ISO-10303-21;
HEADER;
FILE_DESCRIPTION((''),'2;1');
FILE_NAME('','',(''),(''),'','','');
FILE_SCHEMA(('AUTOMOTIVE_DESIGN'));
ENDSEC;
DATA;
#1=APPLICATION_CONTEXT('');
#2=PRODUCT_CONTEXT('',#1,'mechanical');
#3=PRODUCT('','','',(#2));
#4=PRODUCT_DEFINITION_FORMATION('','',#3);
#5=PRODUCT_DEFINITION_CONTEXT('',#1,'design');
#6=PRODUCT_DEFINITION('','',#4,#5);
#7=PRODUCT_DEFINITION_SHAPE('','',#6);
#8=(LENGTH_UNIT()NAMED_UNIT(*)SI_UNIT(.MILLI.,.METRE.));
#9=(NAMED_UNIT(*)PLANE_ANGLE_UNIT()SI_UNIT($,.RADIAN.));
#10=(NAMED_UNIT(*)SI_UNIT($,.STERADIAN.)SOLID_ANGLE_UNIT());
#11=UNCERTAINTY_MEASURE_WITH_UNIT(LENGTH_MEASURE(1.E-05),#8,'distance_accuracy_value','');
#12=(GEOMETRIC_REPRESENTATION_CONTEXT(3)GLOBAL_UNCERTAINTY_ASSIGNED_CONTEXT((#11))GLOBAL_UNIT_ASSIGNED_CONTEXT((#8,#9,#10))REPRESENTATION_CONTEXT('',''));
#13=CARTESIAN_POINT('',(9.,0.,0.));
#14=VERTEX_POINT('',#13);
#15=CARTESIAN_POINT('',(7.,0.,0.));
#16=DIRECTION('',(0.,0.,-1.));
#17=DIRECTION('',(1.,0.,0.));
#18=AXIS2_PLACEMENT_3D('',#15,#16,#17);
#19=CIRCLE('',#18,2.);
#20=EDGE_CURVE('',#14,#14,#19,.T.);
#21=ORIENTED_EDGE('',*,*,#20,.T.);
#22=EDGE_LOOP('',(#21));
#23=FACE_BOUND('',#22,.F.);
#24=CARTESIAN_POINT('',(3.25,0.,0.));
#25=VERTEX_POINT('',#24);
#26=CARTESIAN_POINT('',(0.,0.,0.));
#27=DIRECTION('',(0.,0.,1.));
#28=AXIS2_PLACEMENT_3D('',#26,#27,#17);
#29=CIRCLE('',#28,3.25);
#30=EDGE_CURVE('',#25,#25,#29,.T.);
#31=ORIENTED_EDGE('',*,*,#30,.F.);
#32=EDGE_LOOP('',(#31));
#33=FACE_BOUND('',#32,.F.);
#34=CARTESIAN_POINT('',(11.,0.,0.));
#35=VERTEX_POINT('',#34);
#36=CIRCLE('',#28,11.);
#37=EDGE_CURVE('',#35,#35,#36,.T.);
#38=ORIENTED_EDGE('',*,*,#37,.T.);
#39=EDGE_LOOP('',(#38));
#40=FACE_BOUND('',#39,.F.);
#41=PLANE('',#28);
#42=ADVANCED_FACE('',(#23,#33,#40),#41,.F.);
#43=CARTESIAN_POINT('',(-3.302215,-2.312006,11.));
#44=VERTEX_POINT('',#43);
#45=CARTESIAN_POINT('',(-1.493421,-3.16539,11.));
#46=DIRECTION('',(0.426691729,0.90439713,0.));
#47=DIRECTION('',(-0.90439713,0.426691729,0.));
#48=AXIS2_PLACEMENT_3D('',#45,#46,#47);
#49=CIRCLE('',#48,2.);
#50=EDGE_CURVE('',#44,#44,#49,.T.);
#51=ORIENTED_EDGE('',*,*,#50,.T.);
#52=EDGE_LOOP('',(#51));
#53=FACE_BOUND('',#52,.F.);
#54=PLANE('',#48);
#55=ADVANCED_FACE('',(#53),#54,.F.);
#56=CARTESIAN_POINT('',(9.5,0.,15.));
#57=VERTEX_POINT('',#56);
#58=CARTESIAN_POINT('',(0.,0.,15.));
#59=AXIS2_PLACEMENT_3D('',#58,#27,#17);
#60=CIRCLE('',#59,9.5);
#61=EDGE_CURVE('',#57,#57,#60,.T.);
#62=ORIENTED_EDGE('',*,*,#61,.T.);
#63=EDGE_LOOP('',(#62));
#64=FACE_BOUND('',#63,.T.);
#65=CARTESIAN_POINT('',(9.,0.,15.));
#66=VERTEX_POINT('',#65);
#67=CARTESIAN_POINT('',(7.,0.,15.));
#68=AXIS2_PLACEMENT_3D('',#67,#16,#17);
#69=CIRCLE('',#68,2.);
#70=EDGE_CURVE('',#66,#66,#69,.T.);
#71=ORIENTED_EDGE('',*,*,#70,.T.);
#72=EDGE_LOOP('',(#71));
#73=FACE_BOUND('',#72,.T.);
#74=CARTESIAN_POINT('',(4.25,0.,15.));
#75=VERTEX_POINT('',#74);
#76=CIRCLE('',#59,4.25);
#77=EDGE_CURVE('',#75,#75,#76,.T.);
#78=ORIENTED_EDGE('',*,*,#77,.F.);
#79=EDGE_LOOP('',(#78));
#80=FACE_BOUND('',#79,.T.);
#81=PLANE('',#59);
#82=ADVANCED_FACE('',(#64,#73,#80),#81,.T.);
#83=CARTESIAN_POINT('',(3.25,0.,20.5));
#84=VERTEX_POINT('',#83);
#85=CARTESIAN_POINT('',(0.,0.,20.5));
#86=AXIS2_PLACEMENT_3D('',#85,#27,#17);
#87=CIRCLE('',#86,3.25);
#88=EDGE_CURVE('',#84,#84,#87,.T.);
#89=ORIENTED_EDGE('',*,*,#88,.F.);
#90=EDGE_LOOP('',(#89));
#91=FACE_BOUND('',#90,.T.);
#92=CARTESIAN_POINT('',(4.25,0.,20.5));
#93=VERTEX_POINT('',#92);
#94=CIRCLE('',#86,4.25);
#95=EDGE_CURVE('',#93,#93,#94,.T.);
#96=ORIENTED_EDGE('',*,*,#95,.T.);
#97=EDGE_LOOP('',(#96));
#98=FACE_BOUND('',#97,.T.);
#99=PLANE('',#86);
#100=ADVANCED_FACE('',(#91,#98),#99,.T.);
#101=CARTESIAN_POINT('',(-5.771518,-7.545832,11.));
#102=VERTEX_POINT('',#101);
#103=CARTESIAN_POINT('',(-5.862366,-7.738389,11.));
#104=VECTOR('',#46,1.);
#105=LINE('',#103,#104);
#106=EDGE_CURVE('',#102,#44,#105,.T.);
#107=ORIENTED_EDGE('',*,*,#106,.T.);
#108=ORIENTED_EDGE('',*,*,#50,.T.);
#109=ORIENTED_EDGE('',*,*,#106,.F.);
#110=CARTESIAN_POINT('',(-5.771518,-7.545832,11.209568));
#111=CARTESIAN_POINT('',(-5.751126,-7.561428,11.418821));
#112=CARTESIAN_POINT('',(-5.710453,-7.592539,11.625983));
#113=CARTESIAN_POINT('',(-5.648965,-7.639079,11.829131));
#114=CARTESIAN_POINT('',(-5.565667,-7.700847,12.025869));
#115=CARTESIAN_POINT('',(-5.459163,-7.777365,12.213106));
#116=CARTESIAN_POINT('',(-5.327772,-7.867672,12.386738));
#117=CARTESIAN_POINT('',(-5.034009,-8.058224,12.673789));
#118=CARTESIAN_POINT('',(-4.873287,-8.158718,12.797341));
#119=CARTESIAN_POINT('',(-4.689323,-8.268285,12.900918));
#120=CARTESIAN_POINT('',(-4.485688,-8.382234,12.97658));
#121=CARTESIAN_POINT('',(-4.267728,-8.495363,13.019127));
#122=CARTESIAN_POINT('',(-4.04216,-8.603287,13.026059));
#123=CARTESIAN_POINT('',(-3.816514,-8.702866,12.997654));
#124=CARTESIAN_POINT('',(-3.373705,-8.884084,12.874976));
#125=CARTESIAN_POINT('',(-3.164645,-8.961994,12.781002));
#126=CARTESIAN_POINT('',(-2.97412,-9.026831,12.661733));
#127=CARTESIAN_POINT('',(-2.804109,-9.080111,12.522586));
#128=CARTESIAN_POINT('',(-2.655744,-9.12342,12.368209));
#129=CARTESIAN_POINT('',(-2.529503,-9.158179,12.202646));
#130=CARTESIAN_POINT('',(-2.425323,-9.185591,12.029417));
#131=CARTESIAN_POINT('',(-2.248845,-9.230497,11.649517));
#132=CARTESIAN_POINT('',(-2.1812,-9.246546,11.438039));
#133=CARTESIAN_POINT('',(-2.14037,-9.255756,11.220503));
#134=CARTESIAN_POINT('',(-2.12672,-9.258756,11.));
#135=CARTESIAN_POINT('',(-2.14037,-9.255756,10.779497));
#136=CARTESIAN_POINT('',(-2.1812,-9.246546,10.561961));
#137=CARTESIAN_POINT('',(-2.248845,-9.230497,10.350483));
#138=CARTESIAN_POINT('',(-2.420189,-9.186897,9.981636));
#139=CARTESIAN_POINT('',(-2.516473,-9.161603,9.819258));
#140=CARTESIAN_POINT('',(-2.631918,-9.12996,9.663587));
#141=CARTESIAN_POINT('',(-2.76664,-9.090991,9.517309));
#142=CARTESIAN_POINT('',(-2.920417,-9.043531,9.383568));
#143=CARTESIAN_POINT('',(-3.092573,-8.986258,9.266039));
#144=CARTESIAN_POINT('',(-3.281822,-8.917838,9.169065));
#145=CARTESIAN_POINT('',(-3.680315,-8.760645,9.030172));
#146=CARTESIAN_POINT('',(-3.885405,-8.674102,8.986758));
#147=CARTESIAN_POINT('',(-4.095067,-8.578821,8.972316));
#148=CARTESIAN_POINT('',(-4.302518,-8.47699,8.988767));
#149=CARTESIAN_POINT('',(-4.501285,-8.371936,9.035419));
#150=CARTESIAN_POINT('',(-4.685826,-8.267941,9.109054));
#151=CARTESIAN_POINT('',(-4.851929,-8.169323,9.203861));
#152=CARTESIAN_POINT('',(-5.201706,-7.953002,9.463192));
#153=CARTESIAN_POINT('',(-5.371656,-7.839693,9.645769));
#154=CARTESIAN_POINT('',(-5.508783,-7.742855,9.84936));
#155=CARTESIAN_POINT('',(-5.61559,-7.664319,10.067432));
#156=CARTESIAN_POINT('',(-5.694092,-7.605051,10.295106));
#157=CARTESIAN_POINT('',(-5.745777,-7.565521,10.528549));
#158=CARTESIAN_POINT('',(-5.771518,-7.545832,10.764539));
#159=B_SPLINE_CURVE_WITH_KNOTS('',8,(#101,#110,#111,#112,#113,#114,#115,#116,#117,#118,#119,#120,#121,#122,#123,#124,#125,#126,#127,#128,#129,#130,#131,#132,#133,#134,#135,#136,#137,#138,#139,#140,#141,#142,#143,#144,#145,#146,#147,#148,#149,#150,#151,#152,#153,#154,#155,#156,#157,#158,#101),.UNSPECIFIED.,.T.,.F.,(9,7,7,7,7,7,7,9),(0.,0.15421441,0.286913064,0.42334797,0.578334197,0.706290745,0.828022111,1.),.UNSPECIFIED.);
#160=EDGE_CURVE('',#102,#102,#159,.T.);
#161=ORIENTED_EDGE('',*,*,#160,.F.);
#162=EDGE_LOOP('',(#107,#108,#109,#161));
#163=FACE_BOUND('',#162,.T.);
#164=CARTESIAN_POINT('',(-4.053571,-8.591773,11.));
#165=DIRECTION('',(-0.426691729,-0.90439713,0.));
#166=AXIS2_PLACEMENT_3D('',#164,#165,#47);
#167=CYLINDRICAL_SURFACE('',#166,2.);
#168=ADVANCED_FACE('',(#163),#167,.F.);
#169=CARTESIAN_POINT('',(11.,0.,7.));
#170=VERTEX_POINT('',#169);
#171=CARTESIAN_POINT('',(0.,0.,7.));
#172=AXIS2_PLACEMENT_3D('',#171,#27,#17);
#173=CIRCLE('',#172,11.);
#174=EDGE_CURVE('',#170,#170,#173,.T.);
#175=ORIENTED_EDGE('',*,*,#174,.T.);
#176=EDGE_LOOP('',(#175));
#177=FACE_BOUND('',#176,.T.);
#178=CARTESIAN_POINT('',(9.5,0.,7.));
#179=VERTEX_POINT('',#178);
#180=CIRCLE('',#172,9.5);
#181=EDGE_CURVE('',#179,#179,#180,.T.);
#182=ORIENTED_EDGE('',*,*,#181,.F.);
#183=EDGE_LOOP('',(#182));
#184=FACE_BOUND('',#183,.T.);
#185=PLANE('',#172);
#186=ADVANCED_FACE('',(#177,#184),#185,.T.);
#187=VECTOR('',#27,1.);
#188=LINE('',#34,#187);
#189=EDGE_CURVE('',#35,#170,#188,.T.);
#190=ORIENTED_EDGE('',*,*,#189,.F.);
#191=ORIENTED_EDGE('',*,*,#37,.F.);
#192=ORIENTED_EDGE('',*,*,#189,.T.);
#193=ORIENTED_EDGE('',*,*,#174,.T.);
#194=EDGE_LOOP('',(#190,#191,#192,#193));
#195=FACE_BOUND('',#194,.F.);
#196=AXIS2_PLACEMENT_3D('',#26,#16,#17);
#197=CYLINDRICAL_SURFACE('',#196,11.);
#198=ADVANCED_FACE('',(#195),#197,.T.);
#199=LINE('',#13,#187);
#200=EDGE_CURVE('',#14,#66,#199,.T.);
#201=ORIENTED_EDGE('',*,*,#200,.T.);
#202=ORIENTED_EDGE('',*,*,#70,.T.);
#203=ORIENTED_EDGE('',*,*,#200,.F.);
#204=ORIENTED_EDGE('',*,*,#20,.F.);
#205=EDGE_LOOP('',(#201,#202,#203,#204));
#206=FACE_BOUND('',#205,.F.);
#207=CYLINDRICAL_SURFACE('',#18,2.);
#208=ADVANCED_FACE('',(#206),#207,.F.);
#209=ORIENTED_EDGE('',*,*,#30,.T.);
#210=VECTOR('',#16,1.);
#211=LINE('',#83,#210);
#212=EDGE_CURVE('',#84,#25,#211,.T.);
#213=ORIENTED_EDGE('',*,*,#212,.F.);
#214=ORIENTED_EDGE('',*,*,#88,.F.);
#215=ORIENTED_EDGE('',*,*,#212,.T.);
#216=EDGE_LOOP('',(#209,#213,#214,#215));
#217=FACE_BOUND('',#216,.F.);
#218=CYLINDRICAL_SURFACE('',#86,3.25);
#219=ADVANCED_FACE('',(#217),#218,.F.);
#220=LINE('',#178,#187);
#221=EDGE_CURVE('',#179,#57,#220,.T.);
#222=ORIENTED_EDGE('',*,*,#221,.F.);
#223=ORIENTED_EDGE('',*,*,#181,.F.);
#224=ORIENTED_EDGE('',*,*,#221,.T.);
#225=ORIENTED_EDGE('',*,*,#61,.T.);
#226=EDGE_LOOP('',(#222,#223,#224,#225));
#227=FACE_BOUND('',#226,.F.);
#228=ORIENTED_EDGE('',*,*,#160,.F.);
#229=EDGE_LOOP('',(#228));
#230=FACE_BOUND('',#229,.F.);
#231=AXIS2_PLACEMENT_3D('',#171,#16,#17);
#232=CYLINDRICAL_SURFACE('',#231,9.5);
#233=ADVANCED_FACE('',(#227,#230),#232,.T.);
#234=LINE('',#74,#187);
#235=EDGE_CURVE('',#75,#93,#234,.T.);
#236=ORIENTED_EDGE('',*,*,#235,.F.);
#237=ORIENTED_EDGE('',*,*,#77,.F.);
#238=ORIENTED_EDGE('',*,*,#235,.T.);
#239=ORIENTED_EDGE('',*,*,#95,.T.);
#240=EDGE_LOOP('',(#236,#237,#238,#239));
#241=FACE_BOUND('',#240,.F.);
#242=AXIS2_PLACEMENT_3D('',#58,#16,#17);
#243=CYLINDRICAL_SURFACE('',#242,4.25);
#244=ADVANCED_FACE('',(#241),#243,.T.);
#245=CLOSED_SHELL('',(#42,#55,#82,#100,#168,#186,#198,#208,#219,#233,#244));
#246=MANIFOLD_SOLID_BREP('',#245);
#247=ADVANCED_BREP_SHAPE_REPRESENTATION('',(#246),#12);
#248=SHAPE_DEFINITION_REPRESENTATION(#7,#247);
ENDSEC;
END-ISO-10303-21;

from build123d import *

# Parameters (mm, degrees)
F0_R      = 11
F1_DEPTH  = 7
F2_R      = 9.5
F3_DEPTH  = 8
F4_R      = 4.25
F5_DEPTH  = 5.5
F6_R      = 3.25
F7_DEPTH  = 20.501
F8_R      = 2
F9_DEPTH  = 20.501
F12_R     = 2
F13_DEPTH = 6


# Not quite as in the source:
# - a feature names something its author has since deleted; it is built from what else it names


with BuildPart() as f1:
    # F0 (on Top) → F1 (new body)
    with BuildSketch(Plane.XY):
        Circle(F0_R)
    extrude(amount=F1_DEPTH)

    # F2 (on face) → F3 (join)
    with BuildSketch(Plane.XY.offset(7)):
        Circle(F2_R)
    extrude(amount=F3_DEPTH)

    # F4 (on face) → F5 (join)
    with BuildSketch(Plane.XY.offset(15)):
        Circle(F4_R)
    extrude(amount=F5_DEPTH)

    # F6 (on face) → F7 (cut, through all)
    with BuildSketch(Plane.XY.offset(20.5)):
        Circle(F6_R)
    extrude(amount=-F7_DEPTH, mode=Mode.SUBTRACT)

    # F8 (on face) → F9 (cut, through all)
    with BuildSketch(Plane(origin=(0, 0, 0), x_dir=(1, 0, 0), z_dir=(0, 0, -1))):
        with Locations((7, 0)):
            Circle(F8_R)
    extrude(amount=-F9_DEPTH, mode=Mode.SUBTRACT)

    # F12 (on line) → F13 (cut)
    with BuildSketch(Plane(origin=(-4.0535714286, -8.5917727317, 0), x_dir=(-0.9043971297, 0.4266917293, 0), z_dir=(0.4266917293, 0.9043971297, 0))):
        with Locations((0, 11)):
            Circle(F12_R)
    extrude(amount=F13_DEPTH, mode=Mode.SUBTRACT)


solid = f1.part
